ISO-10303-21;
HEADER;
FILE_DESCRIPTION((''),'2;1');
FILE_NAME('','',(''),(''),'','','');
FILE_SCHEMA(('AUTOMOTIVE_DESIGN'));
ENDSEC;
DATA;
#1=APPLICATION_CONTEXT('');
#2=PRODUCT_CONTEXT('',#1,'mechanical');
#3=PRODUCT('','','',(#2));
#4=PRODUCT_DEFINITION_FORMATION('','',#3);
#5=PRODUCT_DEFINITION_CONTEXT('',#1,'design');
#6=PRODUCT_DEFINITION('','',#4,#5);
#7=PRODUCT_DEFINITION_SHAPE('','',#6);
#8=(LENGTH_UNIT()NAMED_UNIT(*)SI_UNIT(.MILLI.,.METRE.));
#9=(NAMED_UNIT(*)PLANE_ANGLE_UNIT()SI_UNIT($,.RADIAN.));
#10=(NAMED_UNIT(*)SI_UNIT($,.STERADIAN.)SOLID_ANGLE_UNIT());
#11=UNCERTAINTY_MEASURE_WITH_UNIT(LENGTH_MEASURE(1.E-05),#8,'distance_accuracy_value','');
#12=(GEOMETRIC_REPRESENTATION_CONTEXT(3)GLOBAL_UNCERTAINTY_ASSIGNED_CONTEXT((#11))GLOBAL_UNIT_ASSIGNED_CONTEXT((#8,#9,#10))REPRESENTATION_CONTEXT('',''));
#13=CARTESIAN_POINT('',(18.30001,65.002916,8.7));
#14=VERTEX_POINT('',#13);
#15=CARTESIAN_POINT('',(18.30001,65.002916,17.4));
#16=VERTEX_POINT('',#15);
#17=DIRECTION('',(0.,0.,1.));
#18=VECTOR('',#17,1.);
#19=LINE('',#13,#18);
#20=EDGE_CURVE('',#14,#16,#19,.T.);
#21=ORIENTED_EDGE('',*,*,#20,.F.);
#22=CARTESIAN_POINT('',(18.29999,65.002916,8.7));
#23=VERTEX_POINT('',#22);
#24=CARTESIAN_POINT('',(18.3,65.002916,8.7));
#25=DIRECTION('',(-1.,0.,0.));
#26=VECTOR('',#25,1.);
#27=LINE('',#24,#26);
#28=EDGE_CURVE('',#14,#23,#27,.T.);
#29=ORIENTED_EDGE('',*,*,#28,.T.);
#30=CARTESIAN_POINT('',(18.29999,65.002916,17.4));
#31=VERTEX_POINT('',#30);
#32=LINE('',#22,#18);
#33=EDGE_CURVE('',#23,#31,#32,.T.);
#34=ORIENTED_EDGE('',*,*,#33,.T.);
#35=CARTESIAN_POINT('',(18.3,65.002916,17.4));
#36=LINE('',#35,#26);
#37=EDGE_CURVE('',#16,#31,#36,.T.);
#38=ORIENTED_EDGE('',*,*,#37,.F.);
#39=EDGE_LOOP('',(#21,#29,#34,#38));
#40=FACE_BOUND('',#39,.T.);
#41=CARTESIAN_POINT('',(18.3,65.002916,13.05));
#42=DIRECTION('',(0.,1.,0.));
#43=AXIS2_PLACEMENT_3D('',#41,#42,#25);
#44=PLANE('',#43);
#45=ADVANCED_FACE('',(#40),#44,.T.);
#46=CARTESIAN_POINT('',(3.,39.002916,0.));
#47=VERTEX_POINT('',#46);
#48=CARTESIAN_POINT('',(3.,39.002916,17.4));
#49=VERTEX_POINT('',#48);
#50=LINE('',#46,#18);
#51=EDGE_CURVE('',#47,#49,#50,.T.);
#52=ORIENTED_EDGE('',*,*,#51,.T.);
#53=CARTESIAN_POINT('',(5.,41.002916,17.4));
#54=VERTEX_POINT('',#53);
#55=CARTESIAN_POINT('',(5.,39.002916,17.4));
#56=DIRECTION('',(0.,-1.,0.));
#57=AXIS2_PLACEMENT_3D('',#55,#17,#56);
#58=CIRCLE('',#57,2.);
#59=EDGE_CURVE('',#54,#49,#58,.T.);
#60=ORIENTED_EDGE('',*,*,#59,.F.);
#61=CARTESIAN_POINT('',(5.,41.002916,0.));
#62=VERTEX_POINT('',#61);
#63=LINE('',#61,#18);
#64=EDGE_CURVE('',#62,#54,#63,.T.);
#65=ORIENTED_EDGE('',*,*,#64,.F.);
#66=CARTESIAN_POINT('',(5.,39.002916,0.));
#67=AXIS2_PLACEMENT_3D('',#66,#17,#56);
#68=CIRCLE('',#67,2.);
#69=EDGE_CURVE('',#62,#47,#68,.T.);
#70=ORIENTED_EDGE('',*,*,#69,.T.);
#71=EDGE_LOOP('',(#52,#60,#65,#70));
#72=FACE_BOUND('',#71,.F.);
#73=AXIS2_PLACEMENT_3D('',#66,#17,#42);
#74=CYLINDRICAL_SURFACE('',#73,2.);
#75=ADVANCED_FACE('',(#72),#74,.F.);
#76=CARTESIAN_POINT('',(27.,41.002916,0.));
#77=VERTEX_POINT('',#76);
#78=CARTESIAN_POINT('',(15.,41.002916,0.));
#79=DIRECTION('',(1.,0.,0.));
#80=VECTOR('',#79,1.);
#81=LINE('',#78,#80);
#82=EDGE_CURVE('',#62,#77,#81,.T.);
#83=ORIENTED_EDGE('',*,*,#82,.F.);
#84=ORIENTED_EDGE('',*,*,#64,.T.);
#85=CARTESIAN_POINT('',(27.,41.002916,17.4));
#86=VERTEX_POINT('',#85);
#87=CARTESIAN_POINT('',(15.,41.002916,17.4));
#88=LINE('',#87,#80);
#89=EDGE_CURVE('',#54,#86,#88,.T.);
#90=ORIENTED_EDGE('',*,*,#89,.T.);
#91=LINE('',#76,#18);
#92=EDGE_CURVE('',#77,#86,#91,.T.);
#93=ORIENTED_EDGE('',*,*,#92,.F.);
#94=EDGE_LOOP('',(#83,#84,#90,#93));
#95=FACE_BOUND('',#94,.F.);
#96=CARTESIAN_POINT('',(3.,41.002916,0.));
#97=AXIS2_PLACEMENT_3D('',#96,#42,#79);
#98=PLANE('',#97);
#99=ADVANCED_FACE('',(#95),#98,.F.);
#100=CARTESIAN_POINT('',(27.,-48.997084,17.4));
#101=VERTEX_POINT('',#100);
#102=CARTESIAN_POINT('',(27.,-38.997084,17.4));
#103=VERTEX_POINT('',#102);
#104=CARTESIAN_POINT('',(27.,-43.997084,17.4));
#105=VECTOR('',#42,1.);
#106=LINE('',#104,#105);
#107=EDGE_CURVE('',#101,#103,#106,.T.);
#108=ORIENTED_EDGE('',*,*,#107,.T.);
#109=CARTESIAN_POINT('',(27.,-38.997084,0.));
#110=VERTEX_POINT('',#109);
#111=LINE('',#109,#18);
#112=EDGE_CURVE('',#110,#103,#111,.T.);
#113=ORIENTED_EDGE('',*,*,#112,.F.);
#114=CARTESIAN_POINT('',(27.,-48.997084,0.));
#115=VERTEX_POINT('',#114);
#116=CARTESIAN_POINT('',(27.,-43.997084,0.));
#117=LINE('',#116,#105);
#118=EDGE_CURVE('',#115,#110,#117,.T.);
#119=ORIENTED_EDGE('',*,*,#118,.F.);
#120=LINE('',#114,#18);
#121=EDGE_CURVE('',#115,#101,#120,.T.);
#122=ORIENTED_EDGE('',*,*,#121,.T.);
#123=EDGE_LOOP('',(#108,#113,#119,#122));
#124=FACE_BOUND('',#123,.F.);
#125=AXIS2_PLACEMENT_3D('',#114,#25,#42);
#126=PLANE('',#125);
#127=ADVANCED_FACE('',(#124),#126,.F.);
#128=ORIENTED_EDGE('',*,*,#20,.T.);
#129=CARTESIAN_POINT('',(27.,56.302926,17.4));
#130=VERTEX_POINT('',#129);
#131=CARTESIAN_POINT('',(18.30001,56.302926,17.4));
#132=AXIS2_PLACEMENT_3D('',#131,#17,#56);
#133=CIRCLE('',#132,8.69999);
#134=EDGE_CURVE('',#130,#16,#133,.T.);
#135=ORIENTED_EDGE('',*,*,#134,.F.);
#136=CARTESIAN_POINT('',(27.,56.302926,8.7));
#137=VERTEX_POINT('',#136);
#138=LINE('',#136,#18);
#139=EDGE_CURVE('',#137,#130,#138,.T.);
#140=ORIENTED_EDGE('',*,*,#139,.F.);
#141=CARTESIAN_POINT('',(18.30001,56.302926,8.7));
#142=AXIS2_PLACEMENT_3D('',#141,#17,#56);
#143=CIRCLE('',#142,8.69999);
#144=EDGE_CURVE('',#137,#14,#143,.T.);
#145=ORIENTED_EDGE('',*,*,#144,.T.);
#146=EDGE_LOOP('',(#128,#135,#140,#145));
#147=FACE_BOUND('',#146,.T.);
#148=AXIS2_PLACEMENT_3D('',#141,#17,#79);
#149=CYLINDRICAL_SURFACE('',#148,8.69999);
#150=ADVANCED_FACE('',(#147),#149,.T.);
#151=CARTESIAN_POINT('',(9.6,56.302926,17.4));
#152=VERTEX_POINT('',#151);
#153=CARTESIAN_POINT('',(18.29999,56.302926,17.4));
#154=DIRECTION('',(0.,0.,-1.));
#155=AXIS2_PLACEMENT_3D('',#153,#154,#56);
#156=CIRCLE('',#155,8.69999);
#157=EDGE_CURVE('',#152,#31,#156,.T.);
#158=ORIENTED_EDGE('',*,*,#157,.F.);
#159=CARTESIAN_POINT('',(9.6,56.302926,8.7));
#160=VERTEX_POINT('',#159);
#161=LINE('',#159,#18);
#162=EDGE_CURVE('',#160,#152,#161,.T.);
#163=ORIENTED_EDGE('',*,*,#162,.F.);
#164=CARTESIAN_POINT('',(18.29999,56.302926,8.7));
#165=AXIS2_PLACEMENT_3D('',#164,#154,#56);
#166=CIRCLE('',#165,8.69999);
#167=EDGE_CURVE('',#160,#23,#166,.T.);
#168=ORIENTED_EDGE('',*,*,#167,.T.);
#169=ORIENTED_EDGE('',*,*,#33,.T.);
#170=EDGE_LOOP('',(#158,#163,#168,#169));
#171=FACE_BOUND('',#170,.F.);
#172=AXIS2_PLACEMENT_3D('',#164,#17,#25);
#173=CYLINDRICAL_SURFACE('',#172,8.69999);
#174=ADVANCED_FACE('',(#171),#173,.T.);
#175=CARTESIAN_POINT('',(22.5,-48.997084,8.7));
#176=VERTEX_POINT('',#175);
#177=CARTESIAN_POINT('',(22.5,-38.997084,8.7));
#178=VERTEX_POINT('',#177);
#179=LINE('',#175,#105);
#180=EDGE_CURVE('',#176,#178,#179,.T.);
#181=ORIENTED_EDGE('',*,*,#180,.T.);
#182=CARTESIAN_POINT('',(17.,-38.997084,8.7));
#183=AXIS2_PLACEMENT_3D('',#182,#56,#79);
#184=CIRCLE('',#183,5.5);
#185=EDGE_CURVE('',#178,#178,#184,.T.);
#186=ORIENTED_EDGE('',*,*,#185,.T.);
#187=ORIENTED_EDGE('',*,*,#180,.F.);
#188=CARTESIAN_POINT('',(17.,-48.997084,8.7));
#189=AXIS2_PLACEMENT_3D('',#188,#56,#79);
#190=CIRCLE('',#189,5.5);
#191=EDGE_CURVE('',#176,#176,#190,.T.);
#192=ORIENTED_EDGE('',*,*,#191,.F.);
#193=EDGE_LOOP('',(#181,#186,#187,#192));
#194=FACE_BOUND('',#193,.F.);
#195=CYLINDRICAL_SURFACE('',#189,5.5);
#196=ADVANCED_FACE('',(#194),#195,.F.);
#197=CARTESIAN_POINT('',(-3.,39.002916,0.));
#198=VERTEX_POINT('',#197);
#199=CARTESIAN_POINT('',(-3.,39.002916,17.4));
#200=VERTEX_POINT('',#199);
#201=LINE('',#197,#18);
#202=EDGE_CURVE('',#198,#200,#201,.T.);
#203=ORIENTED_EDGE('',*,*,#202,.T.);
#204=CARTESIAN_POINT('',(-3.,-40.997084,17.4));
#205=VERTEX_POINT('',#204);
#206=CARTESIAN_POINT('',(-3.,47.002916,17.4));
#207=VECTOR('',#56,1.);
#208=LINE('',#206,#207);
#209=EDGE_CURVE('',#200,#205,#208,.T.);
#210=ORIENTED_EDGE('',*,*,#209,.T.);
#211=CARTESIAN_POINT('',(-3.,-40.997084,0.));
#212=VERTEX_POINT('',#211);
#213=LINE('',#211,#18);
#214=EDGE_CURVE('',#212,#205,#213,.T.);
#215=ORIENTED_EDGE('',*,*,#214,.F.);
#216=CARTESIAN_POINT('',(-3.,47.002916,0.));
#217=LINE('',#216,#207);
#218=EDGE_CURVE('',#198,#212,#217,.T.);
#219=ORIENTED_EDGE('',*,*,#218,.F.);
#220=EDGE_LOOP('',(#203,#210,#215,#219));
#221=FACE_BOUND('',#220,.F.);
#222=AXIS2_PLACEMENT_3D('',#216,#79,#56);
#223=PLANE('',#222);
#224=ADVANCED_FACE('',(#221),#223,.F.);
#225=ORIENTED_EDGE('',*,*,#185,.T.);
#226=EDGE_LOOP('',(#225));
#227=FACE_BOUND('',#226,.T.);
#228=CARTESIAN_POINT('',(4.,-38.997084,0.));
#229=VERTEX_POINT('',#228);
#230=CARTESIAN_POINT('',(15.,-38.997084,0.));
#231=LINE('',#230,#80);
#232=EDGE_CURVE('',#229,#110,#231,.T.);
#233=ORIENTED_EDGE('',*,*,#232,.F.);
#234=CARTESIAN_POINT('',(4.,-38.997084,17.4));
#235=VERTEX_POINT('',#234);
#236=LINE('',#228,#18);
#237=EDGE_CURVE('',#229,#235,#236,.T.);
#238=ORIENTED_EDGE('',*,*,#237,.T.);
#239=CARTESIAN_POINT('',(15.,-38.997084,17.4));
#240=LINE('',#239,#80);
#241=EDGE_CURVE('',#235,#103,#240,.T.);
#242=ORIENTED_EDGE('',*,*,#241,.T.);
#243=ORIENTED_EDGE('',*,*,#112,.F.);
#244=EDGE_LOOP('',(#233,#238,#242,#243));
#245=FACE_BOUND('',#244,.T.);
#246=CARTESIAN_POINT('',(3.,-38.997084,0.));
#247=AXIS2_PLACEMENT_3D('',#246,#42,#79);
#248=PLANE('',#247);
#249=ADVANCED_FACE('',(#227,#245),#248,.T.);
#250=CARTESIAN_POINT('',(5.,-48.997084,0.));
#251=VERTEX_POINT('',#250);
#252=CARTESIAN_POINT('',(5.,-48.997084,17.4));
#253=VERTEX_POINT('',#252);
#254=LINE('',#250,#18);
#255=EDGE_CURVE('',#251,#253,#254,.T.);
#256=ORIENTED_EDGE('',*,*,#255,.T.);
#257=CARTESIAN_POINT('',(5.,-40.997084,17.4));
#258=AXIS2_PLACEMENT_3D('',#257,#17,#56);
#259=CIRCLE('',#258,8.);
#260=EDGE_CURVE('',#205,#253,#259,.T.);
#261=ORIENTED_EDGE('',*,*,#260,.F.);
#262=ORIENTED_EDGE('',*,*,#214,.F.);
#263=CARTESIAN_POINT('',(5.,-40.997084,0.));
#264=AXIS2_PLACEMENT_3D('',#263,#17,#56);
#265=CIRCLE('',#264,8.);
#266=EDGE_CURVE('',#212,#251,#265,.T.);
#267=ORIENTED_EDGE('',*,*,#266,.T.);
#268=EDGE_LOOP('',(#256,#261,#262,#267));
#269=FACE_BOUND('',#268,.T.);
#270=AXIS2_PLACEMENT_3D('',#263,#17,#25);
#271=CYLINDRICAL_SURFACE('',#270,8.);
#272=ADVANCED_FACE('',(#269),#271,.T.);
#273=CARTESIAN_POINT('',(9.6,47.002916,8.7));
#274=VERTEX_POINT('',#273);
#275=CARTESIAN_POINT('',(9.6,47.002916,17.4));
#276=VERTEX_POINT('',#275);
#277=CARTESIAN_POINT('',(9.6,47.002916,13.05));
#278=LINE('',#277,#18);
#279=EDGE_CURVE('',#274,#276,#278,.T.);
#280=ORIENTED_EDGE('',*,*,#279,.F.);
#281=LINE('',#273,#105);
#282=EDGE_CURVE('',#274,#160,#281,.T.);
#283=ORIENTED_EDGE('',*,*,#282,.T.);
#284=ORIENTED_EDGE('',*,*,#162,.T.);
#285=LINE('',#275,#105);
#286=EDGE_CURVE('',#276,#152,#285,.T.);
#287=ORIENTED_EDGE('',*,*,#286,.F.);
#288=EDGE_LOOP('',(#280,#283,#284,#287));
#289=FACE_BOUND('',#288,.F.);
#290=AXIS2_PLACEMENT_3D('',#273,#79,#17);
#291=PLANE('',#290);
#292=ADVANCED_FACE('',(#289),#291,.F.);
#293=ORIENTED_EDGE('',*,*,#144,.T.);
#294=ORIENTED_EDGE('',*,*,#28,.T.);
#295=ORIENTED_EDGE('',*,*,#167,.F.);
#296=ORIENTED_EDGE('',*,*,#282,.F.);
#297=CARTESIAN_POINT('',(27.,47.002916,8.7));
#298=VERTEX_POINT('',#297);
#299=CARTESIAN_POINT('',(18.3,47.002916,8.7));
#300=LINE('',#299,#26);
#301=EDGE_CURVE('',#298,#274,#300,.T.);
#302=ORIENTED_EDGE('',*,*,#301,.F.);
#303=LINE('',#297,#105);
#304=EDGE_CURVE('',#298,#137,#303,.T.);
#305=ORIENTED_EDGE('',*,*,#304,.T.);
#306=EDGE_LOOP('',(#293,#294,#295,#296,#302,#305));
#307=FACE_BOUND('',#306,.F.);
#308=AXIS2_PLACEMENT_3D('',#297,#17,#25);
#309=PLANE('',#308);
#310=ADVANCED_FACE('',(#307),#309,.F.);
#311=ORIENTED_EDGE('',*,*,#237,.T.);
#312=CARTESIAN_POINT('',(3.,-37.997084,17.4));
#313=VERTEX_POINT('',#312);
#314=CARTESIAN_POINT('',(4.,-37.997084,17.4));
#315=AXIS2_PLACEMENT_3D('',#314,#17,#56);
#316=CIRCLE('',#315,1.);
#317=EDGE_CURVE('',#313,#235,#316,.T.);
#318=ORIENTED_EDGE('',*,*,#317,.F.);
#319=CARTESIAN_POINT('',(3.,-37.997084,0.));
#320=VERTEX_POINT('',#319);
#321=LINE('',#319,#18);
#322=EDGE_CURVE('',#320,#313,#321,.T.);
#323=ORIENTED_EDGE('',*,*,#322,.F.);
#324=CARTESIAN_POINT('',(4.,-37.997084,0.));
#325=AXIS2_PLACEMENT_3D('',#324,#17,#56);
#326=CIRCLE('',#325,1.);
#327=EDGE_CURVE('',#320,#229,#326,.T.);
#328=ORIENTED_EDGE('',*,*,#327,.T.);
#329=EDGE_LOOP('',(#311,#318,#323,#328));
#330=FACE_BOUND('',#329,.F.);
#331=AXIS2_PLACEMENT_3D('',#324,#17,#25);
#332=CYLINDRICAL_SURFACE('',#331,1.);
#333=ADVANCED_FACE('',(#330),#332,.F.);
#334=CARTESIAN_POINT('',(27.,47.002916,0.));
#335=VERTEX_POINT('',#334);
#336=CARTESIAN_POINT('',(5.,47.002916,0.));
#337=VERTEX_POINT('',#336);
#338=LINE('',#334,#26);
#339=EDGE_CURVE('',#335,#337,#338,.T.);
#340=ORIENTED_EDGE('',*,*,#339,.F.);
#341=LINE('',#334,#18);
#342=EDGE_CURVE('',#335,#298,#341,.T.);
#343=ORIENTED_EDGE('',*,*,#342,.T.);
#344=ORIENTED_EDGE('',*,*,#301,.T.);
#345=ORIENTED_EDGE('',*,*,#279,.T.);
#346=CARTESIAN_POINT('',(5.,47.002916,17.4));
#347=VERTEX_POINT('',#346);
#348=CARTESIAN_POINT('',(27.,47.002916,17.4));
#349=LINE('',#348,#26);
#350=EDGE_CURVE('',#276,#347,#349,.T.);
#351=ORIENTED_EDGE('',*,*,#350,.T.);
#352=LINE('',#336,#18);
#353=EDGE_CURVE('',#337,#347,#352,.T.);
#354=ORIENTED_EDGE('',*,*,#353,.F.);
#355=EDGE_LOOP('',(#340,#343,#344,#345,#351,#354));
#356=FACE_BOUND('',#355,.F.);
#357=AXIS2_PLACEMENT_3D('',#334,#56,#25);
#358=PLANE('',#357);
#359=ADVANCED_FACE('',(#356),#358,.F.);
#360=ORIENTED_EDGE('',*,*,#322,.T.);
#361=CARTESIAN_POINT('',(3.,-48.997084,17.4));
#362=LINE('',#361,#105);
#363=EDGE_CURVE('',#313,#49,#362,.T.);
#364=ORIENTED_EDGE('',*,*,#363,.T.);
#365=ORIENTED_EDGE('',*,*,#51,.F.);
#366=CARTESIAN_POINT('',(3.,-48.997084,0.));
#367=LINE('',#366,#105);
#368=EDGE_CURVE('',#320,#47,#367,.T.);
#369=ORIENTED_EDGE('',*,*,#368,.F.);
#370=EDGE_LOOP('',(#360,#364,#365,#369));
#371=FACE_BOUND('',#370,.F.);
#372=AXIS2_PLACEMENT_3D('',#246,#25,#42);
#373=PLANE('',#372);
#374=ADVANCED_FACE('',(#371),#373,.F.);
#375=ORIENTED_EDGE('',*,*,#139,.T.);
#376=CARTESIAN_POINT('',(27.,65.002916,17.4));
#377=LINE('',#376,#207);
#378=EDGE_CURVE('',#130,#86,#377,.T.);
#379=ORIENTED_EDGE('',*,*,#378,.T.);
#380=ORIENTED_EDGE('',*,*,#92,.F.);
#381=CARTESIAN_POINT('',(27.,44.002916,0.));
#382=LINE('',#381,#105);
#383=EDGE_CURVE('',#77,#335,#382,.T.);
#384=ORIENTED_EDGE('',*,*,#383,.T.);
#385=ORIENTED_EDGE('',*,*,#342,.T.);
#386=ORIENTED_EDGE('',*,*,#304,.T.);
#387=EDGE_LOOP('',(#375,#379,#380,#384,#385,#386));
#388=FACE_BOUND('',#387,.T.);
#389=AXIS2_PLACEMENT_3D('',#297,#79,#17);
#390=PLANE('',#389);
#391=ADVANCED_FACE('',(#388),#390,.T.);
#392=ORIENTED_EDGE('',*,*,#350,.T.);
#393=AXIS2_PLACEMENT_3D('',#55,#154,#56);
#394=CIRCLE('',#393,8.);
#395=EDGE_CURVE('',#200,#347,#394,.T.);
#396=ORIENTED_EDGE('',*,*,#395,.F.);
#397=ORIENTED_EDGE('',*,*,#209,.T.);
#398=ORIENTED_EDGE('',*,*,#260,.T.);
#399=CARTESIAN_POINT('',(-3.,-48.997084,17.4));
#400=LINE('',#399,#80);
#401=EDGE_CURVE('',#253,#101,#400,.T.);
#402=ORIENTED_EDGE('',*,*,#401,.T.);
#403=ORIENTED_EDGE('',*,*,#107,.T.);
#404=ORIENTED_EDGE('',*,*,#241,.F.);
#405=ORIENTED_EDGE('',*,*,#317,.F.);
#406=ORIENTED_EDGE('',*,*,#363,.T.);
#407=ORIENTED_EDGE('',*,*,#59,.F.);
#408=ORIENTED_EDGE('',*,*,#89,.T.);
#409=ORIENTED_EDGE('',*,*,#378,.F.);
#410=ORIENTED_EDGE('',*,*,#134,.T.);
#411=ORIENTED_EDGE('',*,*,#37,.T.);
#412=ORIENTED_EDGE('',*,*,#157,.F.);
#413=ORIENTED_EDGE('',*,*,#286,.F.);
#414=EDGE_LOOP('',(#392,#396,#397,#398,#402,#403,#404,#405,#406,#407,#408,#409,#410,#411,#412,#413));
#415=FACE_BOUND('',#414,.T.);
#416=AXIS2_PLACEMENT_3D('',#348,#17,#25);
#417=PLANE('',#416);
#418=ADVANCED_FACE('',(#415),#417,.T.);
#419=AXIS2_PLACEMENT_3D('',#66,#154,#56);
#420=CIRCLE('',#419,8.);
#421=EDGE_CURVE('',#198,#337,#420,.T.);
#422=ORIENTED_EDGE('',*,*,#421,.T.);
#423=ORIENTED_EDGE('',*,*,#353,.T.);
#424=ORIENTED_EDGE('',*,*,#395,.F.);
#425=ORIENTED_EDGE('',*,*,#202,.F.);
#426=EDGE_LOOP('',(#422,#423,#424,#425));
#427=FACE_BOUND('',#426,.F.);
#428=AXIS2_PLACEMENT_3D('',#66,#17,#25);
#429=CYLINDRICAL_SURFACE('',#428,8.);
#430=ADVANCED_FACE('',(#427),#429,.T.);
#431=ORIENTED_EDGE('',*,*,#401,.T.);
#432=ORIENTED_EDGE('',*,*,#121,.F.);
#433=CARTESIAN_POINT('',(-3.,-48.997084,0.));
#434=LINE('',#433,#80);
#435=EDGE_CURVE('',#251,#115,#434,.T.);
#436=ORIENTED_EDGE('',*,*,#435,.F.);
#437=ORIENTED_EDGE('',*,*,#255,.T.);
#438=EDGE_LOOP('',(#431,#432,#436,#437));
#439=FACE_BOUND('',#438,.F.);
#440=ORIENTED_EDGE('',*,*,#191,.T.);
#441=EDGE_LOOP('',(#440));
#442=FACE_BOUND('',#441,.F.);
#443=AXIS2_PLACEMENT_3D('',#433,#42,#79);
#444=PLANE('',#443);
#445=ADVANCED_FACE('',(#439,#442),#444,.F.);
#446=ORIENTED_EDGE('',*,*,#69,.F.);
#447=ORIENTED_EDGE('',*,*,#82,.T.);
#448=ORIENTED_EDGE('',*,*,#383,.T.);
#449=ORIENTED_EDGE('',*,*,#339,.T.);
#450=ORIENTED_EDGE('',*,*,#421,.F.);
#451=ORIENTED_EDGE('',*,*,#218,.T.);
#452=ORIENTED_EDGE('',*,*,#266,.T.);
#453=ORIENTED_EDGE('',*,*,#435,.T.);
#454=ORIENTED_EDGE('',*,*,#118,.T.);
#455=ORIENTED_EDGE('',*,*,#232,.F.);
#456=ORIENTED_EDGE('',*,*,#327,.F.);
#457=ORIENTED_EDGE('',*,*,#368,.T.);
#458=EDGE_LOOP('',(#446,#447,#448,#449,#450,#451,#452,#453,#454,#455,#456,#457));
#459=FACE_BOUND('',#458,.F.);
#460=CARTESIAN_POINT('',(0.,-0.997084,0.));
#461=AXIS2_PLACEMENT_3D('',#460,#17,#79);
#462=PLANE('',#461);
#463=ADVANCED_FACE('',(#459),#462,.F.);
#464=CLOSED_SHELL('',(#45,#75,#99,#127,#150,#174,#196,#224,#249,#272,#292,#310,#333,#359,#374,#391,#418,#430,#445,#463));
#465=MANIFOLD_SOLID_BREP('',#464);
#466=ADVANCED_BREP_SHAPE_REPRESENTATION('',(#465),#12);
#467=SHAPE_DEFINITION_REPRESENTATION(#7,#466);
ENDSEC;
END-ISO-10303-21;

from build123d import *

# Parameters (mm, degrees)
F0_W     = 24
F0_H     = 6
F0_H_2   = 10
F1_DEPTH = 17.4
F2_R     = 8
F3_R     = 2
F5_R     = 5.5
F6_DEPTH = 25
F7_R     = 1
F4_W     = 17.4
F4_H     = 8.7
F8_DEPTH = 18
F9_R     = 8.69999


# Not quite as in the source:
# - a fillet or chamfer is up to 0.001 mm smaller than in the source, because OpenCascade refuses the exact size


with BuildPart() as f1:
    # F0 (on Top) → F1 (new body)
    with BuildSketch(Plane.XY):
        Polygon((3, 41.0029157541), (3, 47.0029157541), (-3, 47.0029157541), (-3, -48.9970842459), (3, -48.9970842459), (3, -38.9970842459), align=None)
        with Locations((15, 44.0029157541)):
            Rectangle(F0_W, F0_H)
        with Locations((15, -43.9970842459)):
            Rectangle(F0_W, F0_H_2)
    extrude(amount=F1_DEPTH)

    # F2
    f2_edges = [f1.edges().sort_by_distance(p)[0] for p in [
        (-3, 47.002916, 8.7),
        (-3, -48.997084, 8.7),
    ]]
    fillet(f2_edges, radius=F2_R)

    # F3
    f3_edges = [f1.edges().sort_by_distance(p)[0] for p in [
        (3, 41.002916, 8.7),
    ]]
    fillet(f3_edges, radius=F3_R)

    # F5 (on face) → F6 (cut)
    with BuildSketch(Plane.XZ.offset(48.9970842459)):
        with Locations((17, 8.7)):
            Circle(F5_R)
    extrude(amount=-F6_DEPTH, mode=Mode.SUBTRACT)

    # F7
    f7_edges = [f1.edges().sort_by_distance(p)[0] for p in [
        (3, -38.997084, 8.7),
    ]]
    fillet(f7_edges, radius=F7_R)

    # F4 (on face) → F8 (join)
    with BuildSketch(Plane(origin=(0, 47.0029157541, 0), x_dir=(-1, 0, 0), z_dir=(0, 1, 0))):
        with Locations((-18.3, 13.05)):
            Rectangle(F4_W, F4_H)
    extrude(amount=F8_DEPTH)

    # F9 (radius 8.7 in the source; OpenCascade refuses exactly that, so slightly less here)
    f9_edges = [f1.edges().sort_by_distance(p)[0] for p in [
        (27, 65.002916, 13.05),
        (9.6, 65.002916, 13.05),
    ]]
    fillet(f9_edges, radius=F9_R)


solid = f1.part
